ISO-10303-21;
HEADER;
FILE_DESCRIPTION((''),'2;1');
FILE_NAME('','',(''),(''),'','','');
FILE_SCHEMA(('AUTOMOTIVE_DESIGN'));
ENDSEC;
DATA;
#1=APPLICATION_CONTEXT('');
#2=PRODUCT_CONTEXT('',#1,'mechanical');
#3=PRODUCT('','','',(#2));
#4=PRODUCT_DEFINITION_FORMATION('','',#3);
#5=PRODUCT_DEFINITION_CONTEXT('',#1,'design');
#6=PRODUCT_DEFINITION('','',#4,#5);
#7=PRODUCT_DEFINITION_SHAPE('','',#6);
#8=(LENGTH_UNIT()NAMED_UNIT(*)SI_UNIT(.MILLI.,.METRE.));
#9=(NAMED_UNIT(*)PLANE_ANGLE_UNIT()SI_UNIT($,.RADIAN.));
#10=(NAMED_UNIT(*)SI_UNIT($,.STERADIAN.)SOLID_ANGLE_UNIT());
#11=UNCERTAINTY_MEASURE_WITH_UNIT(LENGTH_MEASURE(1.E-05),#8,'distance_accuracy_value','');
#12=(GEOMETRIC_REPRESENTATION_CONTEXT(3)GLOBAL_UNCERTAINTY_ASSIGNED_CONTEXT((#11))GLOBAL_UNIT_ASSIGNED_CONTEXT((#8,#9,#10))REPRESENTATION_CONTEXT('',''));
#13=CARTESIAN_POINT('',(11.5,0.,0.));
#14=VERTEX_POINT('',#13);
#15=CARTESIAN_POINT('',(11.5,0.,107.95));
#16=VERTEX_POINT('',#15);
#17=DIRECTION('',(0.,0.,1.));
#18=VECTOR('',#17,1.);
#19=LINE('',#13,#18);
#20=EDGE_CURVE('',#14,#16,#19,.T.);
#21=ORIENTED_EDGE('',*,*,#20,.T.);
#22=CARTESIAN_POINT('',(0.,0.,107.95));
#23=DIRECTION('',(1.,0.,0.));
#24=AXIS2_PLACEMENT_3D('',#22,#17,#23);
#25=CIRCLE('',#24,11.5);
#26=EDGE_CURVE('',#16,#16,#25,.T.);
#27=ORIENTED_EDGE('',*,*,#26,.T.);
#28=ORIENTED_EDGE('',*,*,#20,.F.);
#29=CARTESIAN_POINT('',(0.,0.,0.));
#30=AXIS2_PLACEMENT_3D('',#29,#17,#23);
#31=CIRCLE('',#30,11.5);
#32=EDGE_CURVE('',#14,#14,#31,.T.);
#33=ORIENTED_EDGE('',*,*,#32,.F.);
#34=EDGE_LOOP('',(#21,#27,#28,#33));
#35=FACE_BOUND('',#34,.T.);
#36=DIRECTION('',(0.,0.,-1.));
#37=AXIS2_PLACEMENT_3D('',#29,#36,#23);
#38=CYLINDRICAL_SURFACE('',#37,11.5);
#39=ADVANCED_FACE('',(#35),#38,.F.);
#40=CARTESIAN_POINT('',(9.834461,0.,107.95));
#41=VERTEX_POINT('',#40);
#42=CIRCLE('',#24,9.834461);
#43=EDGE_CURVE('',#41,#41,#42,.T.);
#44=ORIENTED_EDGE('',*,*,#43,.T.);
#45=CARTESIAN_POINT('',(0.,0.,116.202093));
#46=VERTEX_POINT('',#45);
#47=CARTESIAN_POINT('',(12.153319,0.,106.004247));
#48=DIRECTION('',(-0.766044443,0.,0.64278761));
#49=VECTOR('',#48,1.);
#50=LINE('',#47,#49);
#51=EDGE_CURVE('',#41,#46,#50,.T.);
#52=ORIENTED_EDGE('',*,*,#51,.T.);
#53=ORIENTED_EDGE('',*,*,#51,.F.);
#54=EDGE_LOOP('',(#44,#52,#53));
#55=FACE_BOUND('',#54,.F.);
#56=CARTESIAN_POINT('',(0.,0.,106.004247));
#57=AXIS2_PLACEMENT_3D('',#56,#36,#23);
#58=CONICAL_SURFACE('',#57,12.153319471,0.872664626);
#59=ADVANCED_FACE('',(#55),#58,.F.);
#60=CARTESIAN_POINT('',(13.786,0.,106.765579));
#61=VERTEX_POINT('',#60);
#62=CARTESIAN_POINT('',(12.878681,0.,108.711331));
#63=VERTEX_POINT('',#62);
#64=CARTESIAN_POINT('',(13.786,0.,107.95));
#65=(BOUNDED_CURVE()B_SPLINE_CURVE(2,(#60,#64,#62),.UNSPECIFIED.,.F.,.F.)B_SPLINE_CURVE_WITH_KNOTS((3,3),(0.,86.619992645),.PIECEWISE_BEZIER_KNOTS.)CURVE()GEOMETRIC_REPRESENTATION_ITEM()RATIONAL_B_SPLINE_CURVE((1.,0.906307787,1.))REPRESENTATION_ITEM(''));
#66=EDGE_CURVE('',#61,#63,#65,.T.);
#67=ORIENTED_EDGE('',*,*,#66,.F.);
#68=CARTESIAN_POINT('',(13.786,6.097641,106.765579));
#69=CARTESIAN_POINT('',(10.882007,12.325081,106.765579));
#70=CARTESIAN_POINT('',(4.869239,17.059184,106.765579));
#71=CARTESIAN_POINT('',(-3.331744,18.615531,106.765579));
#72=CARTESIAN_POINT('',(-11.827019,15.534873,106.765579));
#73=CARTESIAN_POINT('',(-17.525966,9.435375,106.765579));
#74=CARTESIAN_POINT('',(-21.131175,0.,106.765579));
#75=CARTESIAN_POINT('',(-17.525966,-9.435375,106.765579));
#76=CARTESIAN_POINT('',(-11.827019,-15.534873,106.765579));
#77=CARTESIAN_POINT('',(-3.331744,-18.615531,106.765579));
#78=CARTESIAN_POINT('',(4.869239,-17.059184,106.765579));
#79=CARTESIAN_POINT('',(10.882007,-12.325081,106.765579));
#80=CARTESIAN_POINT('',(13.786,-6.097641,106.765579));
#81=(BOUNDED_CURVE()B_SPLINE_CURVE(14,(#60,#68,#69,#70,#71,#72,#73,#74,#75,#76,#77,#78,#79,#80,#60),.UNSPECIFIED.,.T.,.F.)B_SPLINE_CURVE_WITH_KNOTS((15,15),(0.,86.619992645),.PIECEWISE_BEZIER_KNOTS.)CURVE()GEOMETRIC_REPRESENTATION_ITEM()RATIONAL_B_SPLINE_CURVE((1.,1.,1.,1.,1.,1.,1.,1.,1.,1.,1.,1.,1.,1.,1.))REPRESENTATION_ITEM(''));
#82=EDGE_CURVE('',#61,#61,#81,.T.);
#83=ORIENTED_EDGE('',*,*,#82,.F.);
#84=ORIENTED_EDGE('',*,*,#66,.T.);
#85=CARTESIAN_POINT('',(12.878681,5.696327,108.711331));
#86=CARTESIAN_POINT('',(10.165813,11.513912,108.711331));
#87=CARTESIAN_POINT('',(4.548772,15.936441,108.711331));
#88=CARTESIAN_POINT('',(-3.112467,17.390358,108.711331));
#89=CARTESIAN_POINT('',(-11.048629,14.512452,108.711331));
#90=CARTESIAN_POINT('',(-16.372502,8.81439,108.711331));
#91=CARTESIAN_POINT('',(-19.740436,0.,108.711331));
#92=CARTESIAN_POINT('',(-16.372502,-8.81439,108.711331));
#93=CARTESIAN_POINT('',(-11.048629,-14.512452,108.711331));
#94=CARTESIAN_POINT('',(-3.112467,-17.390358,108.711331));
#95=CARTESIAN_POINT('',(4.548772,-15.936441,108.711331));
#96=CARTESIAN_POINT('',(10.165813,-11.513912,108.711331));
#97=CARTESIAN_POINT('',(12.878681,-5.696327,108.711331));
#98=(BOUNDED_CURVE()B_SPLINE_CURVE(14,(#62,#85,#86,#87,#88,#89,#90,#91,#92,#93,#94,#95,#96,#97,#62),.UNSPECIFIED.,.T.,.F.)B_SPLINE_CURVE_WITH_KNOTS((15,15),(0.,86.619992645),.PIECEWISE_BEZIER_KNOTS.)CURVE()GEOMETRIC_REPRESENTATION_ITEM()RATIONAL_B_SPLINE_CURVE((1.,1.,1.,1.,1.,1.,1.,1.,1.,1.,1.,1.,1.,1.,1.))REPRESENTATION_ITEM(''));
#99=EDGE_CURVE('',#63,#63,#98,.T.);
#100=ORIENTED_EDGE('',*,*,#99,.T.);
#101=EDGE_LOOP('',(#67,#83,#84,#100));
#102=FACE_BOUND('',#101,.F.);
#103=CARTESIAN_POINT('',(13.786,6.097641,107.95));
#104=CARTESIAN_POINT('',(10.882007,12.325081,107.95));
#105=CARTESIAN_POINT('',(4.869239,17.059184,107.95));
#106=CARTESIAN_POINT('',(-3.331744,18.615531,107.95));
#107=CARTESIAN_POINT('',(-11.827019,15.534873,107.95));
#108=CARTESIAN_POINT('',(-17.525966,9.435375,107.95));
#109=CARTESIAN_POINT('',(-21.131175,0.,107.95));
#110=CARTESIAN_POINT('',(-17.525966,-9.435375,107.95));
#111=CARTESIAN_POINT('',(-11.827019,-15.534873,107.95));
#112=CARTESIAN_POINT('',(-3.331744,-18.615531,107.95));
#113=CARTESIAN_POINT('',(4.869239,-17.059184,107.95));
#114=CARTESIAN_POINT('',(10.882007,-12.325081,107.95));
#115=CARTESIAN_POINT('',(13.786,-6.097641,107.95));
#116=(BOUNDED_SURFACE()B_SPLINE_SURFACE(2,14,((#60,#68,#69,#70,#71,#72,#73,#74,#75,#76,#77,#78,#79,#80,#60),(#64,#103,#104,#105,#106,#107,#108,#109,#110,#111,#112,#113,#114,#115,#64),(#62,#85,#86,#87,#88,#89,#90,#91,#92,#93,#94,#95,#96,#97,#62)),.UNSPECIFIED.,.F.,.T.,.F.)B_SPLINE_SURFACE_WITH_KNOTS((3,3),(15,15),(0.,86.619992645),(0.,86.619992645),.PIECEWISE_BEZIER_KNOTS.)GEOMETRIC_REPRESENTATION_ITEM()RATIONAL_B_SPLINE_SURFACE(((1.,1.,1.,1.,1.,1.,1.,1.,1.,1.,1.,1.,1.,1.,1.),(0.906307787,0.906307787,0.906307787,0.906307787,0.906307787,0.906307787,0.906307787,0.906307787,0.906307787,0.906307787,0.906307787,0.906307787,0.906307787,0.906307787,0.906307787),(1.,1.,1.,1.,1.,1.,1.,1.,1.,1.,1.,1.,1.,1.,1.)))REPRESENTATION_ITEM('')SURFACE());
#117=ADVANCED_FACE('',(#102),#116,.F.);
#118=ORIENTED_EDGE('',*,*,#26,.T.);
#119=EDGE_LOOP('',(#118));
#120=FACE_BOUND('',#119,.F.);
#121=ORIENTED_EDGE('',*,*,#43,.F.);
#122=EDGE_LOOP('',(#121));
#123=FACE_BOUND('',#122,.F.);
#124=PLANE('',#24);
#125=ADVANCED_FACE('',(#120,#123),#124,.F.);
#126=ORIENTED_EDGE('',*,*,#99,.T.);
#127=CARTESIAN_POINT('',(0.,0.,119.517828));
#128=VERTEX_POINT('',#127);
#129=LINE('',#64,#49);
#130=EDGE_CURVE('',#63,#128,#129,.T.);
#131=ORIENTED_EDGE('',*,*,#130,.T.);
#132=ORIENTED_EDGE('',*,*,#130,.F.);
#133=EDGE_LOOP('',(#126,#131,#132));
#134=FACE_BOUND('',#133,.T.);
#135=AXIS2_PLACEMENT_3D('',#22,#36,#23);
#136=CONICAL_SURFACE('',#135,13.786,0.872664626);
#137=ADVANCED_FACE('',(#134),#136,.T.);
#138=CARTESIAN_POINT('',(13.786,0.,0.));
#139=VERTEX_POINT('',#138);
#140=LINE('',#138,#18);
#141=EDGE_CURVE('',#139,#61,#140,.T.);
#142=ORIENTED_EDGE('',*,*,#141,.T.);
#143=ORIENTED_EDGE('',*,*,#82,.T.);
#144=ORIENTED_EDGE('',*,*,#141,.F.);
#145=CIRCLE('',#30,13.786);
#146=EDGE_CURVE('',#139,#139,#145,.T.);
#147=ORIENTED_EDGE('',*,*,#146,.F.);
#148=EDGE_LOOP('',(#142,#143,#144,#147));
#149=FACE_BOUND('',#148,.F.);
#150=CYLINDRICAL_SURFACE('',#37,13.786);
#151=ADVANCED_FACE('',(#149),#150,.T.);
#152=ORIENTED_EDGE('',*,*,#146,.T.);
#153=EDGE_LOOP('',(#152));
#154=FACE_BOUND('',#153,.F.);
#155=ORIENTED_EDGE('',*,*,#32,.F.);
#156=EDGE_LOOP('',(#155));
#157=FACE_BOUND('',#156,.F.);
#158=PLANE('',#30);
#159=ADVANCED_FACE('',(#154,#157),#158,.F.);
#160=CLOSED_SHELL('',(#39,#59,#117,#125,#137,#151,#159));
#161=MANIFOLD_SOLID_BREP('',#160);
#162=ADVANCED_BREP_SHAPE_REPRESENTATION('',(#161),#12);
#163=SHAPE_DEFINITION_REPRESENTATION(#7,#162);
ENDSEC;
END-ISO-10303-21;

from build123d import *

# Parameters (mm, degrees)
F0_R     = 13.786
F0_R_2   = 11.5
F1_DEPTH = 107.95
F2_R     = 13.786
F2_R_2   = 11.5
F3_DEPTH = 31.75
F3_TAPER = 50
F4_T     = 2.54
F5_COUNT = 4
F6_R     = 2.54
F6_2_R   = 2.54
F6_3_R   = 2.54
F6_4_R   = 2.54


# Not quite as in the source:
# - a shell that OpenCascade refuses in one call is made with other operations: the cavity is built on its own and cut out
# - a feature names something its author has since deleted; it is built from what else it names


with BuildPart() as f1:
    # F0 (on Top) → F1 (new body)
    with BuildSketch(Plane.XY):
        Circle(F0_R)
        Circle(F0_R_2, mode=Mode.SUBTRACT)
    extrude(amount=F1_DEPTH)

    # F2 (on face) → F3 (join)
    with BuildSketch(Plane.XY.offset(107.95)):
        Circle(F2_R)
        Circle(F2_R_2, mode=Mode.SUBTRACT)
        Circle(F2_R_2)
    extrude(amount=F3_DEPTH, taper=F3_TAPER)

    # F4: shell of thickness 2.54, made by hand


with BuildPart() as f4_core1:
    # F4_t2: copy of F1
    add(f1.part)

    # the walls: a layer under each face that stays
    f4_faces = [f4_core1.faces().sort_by_distance(p)[0] for p in [
        (-13.786, 0, 53.975),
        (-9.1906666667, -9.1906666667, 0),
        (-6.893, 0, 113.7339137577),
        (-11.5, 0, 53.975),
    ]]
    thicken(f4_faces, amount=-F4_T, mode=Mode.SUBTRACT)


with BuildPart() as f1_1:
    add(f1.part)

    # what is left inside the walls is the cavity
    f4_cavity = [f4_core1.part.solids().sort_by_distance(p)[0] for p in [
        (-6.539981, 0, 110.68124),
    ]]
    add(f4_cavity, mode=Mode.SUBTRACT)


with BuildPart() as f5_1:
    # F5: instance of F1
    add(f1_1.part.rotate(Axis((0, 0, 0), (0, 0, 1)), 1 * 360 / F5_COUNT))

    # F6#2
    f6_2_edges = [f5_1.edges().sort_by_distance(p)[0] for p in [
        (0, -13.786, 107.95),
    ]]
    fillet(f6_2_edges, radius=F6_2_R)


with BuildPart() as f5_2:
    # F5: instance of F1
    add(f1_1.part.rotate(Axis((0, 0, 0), (0, 0, 1)), 2 * 360 / F5_COUNT))

    # F6#3
    f6_3_edges = [f5_2.edges().sort_by_distance(p)[0] for p in [
        (13.786, 0, 107.95),
    ]]
    fillet(f6_3_edges, radius=F6_3_R)


with BuildPart() as f5_3:
    # F5: instance of F1
    add(f1_1.part.rotate(Axis((0, 0, 0), (0, 0, 1)), 3 * 360 / F5_COUNT))

    # F6#4
    f6_4_edges = [f5_3.edges().sort_by_distance(p)[0] for p in [
        (0, 13.786, 107.95),
    ]]
    fillet(f6_4_edges, radius=F6_4_R)


with BuildPart() as f1_2:
    add(f1_1.part)

    # F6
    f6_edges = [f1_2.edges().sort_by_distance(p)[0] for p in [
        (-13.786, 0, 107.95),
        (6.893, 0, 113.733914),
    ]]
    fillet(f6_edges, radius=F6_R)


solid = f1_2.part
